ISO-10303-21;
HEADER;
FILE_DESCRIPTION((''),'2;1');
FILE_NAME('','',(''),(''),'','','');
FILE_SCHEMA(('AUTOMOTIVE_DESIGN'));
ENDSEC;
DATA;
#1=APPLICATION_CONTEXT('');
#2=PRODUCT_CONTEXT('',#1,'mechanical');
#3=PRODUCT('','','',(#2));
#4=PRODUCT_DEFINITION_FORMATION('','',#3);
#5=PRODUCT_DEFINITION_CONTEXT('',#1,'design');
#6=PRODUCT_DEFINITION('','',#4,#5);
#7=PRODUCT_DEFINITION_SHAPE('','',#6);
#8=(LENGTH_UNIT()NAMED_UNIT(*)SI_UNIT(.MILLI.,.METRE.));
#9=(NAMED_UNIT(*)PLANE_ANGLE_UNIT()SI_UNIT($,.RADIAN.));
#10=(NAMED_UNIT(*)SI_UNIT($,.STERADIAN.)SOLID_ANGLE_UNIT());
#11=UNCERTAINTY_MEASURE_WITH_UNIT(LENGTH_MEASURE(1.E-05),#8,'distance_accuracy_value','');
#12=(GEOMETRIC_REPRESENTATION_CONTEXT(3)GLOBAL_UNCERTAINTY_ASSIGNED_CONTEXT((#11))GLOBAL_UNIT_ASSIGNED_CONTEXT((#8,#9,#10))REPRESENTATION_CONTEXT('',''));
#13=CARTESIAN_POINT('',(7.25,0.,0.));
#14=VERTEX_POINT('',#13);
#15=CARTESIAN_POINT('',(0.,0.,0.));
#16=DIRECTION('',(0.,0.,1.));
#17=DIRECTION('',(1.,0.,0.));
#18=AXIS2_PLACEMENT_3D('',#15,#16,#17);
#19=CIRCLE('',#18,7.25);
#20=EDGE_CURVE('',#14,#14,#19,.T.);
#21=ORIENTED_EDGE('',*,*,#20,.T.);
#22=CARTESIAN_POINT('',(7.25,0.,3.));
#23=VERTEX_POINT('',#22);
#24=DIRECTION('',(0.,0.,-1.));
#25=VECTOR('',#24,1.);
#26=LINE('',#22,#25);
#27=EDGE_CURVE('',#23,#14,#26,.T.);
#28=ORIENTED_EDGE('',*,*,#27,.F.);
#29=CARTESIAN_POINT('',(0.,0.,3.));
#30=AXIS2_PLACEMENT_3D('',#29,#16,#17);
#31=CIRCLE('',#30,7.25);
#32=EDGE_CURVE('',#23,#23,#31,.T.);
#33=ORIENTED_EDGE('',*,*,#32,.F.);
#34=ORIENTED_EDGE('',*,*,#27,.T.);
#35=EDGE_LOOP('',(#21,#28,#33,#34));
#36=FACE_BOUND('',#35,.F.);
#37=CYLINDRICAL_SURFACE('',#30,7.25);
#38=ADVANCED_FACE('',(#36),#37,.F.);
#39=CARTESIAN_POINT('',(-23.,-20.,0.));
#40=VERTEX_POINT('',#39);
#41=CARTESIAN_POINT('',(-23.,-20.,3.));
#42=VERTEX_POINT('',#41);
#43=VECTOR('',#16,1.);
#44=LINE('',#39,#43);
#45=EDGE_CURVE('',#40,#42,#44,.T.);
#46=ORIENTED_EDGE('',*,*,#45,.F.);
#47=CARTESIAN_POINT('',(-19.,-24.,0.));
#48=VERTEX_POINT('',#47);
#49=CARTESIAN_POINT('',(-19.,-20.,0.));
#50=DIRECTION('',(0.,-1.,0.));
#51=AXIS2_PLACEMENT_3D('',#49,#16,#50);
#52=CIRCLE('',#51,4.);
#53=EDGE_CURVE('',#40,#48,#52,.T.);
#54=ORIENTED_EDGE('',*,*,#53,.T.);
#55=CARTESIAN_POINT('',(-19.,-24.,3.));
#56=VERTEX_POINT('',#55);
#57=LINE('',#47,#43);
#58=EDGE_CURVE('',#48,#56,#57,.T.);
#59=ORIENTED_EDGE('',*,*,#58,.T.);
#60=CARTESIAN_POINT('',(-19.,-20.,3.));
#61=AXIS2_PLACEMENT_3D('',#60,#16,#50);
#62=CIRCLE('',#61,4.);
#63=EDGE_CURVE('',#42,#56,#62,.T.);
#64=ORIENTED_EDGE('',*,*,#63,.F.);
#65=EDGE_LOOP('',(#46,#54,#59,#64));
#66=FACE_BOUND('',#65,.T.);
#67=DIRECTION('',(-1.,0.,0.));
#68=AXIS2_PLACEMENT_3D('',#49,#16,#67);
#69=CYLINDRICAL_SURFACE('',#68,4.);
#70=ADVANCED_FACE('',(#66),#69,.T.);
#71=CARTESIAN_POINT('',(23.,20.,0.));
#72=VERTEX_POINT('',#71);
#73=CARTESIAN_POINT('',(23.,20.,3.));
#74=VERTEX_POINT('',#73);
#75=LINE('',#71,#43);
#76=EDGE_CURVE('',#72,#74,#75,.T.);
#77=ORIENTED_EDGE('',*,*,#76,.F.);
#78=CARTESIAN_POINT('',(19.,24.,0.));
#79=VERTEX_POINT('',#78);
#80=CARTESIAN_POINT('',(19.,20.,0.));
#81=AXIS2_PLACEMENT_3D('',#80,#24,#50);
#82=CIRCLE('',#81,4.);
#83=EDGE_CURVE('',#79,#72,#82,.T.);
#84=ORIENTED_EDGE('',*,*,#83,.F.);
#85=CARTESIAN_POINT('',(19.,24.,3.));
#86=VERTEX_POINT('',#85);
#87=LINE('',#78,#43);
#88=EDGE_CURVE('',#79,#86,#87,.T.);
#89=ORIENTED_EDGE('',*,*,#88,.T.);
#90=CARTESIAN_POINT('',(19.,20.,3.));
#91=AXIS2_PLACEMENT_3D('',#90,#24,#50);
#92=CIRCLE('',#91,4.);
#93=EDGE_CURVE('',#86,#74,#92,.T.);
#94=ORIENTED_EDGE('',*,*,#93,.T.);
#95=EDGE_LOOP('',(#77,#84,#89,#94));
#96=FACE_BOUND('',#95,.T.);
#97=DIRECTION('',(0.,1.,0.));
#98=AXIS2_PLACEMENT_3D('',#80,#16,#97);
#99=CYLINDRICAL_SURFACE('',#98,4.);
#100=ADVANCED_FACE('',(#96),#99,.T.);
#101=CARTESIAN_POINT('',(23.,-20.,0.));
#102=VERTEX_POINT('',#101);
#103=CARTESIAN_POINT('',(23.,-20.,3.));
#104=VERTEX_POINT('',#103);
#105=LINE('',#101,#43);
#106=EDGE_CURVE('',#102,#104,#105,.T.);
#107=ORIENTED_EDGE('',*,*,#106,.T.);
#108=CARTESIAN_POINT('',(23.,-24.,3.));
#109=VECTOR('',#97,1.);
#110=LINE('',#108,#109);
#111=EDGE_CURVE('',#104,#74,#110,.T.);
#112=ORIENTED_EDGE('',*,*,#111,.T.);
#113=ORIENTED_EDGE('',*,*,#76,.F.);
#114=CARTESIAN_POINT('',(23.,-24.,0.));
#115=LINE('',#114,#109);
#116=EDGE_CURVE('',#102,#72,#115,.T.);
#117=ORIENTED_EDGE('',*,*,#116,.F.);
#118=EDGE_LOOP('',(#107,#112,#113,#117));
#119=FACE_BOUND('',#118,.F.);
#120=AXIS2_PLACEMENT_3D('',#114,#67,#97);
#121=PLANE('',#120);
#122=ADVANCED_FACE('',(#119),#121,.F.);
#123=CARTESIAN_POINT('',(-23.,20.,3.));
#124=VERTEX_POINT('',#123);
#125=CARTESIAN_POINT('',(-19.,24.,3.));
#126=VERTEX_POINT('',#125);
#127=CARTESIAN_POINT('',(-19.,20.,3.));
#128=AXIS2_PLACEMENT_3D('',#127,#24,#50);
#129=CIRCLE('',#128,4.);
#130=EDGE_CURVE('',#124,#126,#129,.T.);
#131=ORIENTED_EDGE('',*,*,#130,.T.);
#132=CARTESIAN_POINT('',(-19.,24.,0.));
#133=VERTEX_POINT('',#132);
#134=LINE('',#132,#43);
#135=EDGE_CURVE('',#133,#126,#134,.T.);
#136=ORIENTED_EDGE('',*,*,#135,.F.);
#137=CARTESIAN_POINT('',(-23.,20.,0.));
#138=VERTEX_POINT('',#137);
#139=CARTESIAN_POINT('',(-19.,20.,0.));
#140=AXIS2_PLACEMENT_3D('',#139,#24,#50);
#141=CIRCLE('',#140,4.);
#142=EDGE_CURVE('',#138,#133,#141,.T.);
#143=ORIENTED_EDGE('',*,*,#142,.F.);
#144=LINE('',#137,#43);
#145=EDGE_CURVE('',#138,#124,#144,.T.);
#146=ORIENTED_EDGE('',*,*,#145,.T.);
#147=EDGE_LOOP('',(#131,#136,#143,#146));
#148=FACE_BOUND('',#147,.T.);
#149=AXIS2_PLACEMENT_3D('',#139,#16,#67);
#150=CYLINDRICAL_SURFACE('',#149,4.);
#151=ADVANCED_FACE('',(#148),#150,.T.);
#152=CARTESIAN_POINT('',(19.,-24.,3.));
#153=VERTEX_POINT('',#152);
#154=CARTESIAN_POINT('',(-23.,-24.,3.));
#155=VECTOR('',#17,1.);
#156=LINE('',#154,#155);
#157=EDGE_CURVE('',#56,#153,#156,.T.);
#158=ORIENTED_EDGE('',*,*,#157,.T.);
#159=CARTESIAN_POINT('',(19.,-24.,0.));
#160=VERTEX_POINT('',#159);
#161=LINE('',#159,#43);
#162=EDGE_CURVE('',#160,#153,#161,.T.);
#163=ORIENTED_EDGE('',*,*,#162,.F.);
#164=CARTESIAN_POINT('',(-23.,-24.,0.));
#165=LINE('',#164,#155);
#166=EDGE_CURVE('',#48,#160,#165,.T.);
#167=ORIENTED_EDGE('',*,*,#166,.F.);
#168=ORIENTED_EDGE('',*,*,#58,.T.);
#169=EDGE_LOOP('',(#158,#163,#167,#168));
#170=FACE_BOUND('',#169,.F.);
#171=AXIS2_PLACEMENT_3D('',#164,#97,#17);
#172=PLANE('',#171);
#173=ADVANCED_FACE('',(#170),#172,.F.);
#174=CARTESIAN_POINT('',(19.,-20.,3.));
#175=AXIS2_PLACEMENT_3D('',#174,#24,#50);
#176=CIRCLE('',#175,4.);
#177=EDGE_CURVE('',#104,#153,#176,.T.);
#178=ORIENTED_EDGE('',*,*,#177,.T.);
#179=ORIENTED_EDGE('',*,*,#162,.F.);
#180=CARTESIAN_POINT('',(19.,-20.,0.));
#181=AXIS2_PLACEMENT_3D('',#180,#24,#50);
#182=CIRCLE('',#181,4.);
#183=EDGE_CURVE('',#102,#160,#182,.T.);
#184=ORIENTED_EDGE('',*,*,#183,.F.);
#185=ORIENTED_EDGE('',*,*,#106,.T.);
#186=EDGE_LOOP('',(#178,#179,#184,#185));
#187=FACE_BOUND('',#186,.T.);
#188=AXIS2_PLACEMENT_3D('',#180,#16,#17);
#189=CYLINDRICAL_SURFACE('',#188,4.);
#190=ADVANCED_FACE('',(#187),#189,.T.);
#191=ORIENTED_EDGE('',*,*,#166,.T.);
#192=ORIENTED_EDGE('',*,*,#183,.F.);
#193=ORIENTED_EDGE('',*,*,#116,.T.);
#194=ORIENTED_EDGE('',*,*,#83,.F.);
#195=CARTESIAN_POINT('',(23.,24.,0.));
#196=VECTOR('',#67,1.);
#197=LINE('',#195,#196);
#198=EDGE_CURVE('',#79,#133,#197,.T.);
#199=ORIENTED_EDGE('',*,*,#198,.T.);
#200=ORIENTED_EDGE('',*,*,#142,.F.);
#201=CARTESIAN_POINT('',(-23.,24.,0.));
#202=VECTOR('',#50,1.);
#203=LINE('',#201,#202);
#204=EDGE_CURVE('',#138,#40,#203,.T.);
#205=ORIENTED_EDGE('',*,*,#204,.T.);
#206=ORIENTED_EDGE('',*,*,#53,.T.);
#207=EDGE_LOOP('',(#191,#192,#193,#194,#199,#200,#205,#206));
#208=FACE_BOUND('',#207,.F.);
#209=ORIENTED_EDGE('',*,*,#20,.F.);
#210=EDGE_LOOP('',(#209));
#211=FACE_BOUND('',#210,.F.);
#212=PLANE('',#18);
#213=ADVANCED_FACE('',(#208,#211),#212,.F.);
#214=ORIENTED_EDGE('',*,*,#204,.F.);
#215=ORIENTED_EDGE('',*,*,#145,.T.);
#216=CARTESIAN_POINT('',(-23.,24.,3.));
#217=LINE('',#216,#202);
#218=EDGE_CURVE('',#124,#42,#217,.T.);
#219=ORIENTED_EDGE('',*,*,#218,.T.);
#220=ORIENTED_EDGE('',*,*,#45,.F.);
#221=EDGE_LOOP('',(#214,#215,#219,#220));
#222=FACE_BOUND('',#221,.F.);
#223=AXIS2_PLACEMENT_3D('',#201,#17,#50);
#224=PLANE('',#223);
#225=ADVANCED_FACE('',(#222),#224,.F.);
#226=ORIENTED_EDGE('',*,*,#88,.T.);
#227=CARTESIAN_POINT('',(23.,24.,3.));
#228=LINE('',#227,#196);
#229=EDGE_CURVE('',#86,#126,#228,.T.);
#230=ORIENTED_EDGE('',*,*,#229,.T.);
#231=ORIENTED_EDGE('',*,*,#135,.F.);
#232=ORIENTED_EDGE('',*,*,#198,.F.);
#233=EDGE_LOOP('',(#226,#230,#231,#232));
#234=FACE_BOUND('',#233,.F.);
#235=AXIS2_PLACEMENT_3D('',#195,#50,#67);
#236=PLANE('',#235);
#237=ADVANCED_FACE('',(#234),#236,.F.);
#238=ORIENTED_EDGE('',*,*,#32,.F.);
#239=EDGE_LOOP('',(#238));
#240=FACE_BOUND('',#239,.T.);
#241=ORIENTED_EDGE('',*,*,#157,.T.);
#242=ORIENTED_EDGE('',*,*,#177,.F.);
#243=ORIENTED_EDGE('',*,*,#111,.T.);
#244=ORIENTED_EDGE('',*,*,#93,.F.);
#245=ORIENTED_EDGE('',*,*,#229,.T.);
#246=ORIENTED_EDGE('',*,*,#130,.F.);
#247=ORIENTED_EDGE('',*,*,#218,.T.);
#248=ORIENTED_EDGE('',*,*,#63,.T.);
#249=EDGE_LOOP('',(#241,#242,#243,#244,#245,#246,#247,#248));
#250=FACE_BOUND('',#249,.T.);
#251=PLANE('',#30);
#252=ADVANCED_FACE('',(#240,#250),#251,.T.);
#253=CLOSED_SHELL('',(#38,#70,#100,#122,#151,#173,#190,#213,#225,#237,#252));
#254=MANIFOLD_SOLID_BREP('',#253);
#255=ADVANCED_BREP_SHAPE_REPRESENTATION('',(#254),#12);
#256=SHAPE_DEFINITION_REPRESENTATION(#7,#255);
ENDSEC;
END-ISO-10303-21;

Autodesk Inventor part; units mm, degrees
ref_plane "YZ Plane" through (0, 0, 0) normal (1, 0, 0) x (0, 1, 0)
ref_plane "XZ Plane" through (0, 0, 0) normal (0, 1, 0) x (-1, 0, 0)
ref_plane "XY Plane" through (0, 0, 0) normal (0, 0, 1) x (1, 0, 0)
sketch "Sketch1" plane through (0, 0, 0) normal (0, 0, 1) x (1, 0, 0)
  line L0 (-23, -24) -> (23, -24)
  line L1 (23, -24) -> (23, 24)
  line L2 (23, 24) -> (-23, 24)
  line L3 (-23, 24) -> (-23, -24)
  line L4 (-23, -24) -> (23, 24) construction
  line L5 (23, -24) -> (-23, 24) construction
  point P0 (0, 0)
  dimension "d0" = 46
  dimension "d1" = 48
extrude "Plate1" add sketch "Sketch1" along normal blind 3
fillet "Corner Round1" radius 4 4 edges at (23, -24, 1.5) (23, 24, 1.5) (-23, -24, 1.5) (-23, 24, 1.5)
sketch "Sketch2" plane through (0, 0, 3) normal (0, 0, 1) x (1, 0, 0)
  circle A0 centre (0, 0) radius 7.25
  dimension "d4" = 14.5
extrude "Extrusion1" cut sketch "Sketch2" against normal through all
equation "\"d2\" = Thickness"
equation "\"BendRadius\" = Thickness"
equation "\"BendReliefWidth\" = Thickness"
equation "\"BendReliefDepth\" = 0.5 * Thickness"
equation "\"CornerReliefSize\" = 4 * Thickness"
equation "\"MinimumRemnant\" = 2 * Thickness"
equation "\"TransitionRadius\" = BendRadius"
equation "\"JacobiRadiusSize\" = BendRadius"
equation "\"GapSize\" = Thickness"
equation "\"Thickness\" = 3"
properties part number "NDM 4.0.2  base plate" material "Stainless Steel"
